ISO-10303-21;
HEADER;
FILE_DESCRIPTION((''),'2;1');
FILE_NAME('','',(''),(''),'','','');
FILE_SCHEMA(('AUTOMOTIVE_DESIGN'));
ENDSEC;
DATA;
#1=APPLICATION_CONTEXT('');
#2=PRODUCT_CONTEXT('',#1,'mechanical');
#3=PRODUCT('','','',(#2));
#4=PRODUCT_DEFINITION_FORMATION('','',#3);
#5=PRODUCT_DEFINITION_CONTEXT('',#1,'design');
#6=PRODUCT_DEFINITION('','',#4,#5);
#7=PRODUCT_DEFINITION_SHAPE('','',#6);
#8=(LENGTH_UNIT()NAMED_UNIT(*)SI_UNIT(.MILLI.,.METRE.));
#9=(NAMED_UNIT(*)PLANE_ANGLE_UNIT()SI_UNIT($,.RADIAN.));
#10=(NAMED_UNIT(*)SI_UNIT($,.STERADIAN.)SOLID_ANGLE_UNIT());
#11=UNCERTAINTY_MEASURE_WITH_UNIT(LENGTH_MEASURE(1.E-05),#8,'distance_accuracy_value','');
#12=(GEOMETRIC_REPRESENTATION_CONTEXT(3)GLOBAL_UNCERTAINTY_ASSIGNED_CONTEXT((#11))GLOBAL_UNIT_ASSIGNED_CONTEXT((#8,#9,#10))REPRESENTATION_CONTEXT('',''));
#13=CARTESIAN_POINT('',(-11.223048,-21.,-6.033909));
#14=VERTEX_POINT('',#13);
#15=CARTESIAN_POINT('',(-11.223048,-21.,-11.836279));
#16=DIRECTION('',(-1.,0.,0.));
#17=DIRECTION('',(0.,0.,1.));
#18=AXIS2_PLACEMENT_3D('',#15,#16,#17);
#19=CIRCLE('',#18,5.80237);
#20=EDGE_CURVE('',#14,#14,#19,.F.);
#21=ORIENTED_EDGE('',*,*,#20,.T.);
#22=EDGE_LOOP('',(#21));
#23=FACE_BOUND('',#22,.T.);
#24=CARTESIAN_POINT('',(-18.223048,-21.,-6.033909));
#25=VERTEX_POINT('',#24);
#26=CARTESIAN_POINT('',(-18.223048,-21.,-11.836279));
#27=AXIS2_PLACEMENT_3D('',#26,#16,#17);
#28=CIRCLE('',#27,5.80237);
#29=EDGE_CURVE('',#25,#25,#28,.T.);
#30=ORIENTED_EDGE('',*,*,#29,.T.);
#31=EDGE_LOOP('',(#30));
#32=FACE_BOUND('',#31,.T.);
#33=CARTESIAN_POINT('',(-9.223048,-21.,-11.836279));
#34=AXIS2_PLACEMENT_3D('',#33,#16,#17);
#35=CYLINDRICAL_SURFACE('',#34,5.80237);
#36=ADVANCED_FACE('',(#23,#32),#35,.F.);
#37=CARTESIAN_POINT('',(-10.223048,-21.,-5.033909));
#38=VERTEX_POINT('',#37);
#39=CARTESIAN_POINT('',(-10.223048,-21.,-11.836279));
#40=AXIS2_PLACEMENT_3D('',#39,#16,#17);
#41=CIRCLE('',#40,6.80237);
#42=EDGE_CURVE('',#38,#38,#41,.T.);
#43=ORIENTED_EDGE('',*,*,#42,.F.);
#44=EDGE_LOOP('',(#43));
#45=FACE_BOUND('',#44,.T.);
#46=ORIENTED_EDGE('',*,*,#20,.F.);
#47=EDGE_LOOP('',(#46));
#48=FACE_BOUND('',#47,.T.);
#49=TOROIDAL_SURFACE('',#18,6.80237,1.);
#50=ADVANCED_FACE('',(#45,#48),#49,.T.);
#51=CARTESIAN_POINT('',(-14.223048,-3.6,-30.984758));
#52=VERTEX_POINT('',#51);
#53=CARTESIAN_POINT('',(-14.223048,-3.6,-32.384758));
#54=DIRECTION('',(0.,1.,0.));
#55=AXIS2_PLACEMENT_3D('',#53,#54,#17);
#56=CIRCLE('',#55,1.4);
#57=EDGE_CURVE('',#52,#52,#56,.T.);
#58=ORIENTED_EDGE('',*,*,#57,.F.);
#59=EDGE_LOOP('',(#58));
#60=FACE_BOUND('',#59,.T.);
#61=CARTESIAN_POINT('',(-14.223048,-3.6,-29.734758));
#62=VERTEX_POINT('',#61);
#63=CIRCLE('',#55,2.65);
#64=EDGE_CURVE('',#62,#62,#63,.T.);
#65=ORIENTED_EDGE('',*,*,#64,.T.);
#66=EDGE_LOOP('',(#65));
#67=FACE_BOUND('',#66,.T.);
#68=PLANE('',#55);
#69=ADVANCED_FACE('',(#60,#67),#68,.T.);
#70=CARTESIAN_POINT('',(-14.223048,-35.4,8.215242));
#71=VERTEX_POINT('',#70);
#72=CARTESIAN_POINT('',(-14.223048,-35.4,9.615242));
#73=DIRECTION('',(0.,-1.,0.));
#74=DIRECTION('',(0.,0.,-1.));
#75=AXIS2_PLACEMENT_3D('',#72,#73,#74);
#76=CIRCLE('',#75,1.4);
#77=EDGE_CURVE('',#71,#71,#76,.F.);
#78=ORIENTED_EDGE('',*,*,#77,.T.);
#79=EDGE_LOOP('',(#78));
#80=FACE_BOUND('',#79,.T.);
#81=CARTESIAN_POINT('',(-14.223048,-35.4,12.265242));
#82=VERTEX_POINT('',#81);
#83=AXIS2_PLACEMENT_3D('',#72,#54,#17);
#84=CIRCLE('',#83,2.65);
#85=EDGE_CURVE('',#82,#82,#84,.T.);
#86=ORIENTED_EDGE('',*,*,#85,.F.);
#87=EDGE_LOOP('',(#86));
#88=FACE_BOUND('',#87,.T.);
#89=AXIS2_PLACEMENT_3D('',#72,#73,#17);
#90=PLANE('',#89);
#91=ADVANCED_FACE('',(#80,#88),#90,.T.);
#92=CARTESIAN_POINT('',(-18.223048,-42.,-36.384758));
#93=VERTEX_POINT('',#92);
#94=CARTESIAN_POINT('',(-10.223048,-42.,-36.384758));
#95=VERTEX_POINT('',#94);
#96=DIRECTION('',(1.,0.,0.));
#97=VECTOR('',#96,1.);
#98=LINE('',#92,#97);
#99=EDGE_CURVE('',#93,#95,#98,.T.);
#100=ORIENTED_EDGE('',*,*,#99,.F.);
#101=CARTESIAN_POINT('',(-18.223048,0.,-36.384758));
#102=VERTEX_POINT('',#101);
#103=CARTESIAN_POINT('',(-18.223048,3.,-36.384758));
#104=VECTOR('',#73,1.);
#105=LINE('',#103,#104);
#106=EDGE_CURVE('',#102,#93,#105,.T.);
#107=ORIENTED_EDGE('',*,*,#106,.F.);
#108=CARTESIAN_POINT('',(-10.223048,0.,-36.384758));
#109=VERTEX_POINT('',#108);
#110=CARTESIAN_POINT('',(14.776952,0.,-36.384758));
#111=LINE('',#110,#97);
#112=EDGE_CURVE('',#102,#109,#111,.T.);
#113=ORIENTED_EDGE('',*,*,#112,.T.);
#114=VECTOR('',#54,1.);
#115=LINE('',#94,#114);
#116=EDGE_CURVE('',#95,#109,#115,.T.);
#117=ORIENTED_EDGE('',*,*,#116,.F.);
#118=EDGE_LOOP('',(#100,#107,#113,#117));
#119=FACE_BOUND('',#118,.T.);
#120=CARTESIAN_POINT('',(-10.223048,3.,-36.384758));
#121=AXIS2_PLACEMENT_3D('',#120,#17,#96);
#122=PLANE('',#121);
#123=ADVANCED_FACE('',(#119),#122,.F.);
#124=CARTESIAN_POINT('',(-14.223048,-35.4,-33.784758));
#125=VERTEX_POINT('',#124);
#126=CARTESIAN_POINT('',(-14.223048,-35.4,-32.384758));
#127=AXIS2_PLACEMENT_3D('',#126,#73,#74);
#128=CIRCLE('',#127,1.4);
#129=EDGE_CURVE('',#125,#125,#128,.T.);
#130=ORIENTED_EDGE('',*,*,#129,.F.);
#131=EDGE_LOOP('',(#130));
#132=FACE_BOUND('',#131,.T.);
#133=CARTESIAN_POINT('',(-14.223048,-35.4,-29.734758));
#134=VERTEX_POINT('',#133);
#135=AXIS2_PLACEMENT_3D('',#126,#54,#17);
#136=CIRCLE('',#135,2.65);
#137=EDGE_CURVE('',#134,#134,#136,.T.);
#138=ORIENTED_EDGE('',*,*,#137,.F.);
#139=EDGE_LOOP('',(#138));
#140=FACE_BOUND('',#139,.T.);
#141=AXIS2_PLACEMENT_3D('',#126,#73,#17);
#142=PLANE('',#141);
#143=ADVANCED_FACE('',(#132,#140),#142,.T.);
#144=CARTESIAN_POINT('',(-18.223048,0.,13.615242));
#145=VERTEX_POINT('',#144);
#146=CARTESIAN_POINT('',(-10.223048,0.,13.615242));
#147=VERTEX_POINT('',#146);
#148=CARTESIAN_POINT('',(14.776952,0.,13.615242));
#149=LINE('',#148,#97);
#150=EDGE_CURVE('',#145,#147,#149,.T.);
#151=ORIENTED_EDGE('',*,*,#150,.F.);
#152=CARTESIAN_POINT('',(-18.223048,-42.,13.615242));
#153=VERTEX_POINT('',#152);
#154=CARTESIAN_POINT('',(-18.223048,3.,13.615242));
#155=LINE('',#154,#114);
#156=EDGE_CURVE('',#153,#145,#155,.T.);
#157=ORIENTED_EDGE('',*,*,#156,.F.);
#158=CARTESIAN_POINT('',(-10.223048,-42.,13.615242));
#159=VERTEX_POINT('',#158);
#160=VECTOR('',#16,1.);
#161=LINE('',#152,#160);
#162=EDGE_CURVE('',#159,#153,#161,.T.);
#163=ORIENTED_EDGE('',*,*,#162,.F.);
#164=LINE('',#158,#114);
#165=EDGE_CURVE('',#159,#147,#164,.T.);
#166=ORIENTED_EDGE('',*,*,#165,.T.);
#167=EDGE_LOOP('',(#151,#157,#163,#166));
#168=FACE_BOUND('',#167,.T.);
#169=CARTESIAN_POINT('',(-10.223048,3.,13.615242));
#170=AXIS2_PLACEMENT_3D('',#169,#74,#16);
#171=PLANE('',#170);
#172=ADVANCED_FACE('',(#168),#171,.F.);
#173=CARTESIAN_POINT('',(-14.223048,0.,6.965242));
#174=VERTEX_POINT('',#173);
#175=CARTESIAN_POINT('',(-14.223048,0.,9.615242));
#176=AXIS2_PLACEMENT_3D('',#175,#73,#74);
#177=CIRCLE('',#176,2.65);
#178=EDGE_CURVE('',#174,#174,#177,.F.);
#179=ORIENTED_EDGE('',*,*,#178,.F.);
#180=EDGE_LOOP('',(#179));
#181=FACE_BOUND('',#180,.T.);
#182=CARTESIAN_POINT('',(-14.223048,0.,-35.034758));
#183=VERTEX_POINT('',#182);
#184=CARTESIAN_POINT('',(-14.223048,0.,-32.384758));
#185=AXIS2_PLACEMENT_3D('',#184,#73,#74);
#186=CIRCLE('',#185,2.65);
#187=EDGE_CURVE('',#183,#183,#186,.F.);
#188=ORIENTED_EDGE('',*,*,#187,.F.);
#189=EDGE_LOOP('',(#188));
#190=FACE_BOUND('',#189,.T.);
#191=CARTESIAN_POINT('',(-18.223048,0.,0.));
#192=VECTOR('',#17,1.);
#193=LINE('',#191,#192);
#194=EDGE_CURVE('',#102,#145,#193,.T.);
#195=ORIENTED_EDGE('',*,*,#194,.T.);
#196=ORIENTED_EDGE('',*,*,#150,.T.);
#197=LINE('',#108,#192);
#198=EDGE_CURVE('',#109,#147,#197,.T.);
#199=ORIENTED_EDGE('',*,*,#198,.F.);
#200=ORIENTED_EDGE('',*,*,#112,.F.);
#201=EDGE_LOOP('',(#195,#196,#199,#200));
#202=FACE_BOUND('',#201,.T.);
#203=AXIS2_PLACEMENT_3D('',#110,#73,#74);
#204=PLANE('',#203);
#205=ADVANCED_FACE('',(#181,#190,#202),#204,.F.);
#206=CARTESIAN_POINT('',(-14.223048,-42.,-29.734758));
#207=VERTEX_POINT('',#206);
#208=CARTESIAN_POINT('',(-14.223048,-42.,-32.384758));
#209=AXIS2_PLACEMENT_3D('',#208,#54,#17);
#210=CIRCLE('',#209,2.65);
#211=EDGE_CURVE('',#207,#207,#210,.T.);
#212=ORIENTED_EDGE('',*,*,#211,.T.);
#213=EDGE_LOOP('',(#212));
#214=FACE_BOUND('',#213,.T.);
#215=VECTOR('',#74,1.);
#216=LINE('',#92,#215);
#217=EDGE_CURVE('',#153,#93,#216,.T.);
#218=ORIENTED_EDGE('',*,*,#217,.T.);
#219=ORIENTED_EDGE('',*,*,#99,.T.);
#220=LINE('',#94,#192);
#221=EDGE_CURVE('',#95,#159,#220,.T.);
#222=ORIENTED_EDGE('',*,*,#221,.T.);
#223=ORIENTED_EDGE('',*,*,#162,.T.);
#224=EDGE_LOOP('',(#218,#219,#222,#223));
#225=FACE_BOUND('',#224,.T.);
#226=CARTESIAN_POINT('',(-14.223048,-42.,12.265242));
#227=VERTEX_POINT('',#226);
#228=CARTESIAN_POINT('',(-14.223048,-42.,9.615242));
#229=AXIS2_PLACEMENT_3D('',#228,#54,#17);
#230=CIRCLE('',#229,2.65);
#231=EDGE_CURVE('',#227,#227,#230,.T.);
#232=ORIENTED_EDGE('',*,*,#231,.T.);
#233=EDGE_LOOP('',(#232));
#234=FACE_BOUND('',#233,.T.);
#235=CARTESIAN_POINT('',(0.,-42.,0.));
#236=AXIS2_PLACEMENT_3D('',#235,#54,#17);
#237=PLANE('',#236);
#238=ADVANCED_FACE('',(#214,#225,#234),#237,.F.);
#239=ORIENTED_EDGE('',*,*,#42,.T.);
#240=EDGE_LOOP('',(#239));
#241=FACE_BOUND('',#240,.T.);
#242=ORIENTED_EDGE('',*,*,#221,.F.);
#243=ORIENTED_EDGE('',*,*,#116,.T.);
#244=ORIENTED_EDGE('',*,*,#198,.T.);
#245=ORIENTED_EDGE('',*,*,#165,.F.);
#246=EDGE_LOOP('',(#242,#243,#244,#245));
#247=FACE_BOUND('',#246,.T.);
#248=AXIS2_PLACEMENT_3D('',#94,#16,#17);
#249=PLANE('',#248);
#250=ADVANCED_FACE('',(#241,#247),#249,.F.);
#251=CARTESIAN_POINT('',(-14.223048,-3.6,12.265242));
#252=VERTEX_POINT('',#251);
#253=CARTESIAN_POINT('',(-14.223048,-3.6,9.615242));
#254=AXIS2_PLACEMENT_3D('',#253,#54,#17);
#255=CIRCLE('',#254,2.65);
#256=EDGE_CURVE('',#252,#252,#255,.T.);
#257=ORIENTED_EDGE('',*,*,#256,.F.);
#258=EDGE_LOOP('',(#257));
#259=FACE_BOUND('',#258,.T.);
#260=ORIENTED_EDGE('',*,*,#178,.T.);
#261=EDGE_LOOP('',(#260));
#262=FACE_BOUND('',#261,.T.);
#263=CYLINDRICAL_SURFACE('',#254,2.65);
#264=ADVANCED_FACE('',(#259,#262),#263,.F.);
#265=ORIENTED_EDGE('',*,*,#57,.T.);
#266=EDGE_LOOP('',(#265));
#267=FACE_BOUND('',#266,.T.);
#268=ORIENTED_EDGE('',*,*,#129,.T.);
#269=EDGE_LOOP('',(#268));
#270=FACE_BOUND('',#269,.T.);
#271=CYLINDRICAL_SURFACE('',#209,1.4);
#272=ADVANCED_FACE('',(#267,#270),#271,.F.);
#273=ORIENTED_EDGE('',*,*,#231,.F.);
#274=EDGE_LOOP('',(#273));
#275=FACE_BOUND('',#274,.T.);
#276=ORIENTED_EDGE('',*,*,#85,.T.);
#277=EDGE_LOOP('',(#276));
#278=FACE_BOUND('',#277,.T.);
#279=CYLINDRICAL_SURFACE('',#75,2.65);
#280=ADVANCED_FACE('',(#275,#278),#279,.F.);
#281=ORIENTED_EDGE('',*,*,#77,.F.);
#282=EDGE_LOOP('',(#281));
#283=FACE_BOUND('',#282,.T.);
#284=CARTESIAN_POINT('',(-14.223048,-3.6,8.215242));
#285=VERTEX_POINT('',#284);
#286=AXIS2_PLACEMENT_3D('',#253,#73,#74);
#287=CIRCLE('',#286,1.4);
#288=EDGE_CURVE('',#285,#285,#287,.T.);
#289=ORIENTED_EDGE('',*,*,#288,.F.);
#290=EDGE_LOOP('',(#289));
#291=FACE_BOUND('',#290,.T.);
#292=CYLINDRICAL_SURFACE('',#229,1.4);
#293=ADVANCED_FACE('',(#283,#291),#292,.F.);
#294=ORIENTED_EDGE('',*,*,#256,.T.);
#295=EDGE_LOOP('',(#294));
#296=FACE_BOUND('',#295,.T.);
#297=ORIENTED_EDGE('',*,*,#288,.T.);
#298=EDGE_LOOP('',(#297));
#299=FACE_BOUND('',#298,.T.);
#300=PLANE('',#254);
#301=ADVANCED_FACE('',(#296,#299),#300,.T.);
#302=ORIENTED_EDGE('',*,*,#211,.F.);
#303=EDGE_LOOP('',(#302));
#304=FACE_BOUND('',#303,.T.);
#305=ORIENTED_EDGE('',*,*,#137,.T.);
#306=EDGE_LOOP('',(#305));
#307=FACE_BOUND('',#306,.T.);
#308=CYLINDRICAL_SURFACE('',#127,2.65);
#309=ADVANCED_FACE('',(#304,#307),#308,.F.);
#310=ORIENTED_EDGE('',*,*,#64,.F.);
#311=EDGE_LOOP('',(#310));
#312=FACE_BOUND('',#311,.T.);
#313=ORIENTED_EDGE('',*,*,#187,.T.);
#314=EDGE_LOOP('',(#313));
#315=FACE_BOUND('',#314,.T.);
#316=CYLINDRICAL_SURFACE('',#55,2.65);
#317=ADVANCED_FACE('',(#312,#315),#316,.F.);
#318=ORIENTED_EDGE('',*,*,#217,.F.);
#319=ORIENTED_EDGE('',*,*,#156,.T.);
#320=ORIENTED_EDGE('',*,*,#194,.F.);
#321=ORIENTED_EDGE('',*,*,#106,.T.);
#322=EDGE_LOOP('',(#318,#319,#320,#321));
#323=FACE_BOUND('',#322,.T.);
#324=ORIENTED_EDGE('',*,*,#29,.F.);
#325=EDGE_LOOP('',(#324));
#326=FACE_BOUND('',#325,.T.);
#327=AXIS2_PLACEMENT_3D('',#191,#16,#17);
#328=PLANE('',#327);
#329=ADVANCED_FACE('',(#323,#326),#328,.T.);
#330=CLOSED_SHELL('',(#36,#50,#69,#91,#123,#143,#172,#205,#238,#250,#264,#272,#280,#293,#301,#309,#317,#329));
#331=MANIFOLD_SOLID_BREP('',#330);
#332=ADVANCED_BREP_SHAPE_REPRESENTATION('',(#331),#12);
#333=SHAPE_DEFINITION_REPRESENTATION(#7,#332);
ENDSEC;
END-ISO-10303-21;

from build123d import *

# Parameters (mm, degrees)
SKETCH1_W           = 25
SKETCH1_H           = 50
SKETCH1_R           = 3.4
BOSS_EXTRUDE1_DEPTH = 3
SKETCH2_W           = 50
SKETCH2_H           = 3
BOSS_EXTRUDE2_DEPTH = 8
SKETCH3_W           = 8
SKETCH3_H           = 50
BOSS_EXTRUDE3_DEPTH = 42
SKETCH4_R           = 2.65
CUT_EXTRUDE1_DEPTH  = 6.6
SKETCH5_R           = 5.802370205
CUT_EXTRUDE2_DEPTH  = 9
FILLET2_R           = 1
SKETCH6_R           = 12.6
BOSS_EXTRUDE4_DEPTH = 2
FILLET4_R           = 1
SKETCH8_R           = 1.589780168
SKETCH8_R_2         = 1.777428262
CUT_EXTRUDE3_DEPTH  = 10
SKETCH9_W           = 49.021678163
SKETCH9_H           = 20.976854622
CUT_EXTRUDE4_DEPTH  = 68.79439129
SKETCH10_R          = 1.4
CUT_EXTRUDE5_DEPTH  = 56.950783118


with BuildPart() as part:
    # Sketch1 → Boss-Extrude1 (new body)
    with BuildSketch(Plane(origin=(0, 0, 0), x_dir=(1, 0, 0), z_dir=(0, 1, 0))):
        with Locations((2.276951673, 11.384758364)):
            Rectangle(SKETCH1_W, SKETCH1_H)
        with Locations(Location((1.276951673, 11.384758364, 0), (0, 0, 270))):
            Circle(SKETCH1_R, mode=Mode.SUBTRACT)
    extrude(amount=BOSS_EXTRUDE1_DEPTH)

    # Sketch2 → Boss-Extrude2 (add)
    with BuildSketch(Plane.ZY.offset(10.223048327)):
        with Locations((-11.384758364, 1.5)):
            Rectangle(SKETCH2_W, SKETCH2_H)
    extrude(amount=BOSS_EXTRUDE2_DEPTH)

    # Sketch3 → Boss-Extrude3 (add)
    with BuildSketch(Plane.XZ):
        with Locations((-14.223048327, -11.384758364)):
            Rectangle(SKETCH3_W, SKETCH3_H)
    extrude(amount=BOSS_EXTRUDE3_DEPTH)

    # Sketch4 → Cut-Extrude1 (cut)
    with BuildSketch(Plane(origin=(0, 3, 0), x_dir=(1, 0, 0), z_dir=(0, 1, 0))):
        with Locations(Location((-14.223048327, 32.384758364, 0), (0, 0, 270))):
            Circle(SKETCH4_R)
        with Locations(Location((-14.223048327, -9.615241636, 0), (0, 0, 270))):
            Circle(SKETCH4_R)
    cut_extrude1 = extrude(amount=-CUT_EXTRUDE1_DEPTH, mode=Mode.SUBTRACT)

    # Mirror1: Cut-Extrude1 across plane
    add(cut_extrude1.mirror(Plane.ZX.offset(-19.5)), mode=Mode.SUBTRACT)

    # Sketch5 → Cut-Extrude2 (cut)
    with BuildSketch(Plane.ZY.offset(18.223048327)):
        with Locations((-11.836279124, -21)):
            Circle(SKETCH5_R)
    extrude(amount=-CUT_EXTRUDE2_DEPTH, mode=Mode.SUBTRACT)

    # Fillet2
    fillet2_edges = [part.edges().sort_by_distance(p)[0] for p in [
        (-10.223048327, -21, -17.638649329),
    ]]
    fillet(fillet2_edges, radius=FILLET2_R)

    # Mirror2: Cut-Extrude1 across plane
    add(cut_extrude1.mirror(Plane.ZY.offset(1.723048327)), mode=Mode.SUBTRACT)

    # Sketch6 → Boss-Extrude4 (add)
    with BuildSketch(Plane(origin=(0, 3, 0), x_dir=(1, 0, 0), z_dir=(0, 1, 0))):
        with BuildLine():
            Line((14.776951673, 5.825082115), (14.776951673, 16.944434614))
            ThreePointArc((14.776951673, 16.944434614), (-13.323048327, 11.384758364), (14.776951673, 5.825082115))
        make_face()
        with Locations(Location((1.276951673, 11.384758364, 0), (0, 0, 270))):
            Circle(SKETCH6_R, mode=Mode.SUBTRACT)
    extrude(amount=BOSS_EXTRUDE4_DEPTH)

    # Fillet4
    # the kernel refuses this fillet: 1 mm, written as the material it takes off along each edge
    with BuildSketch(Plane(origin=(14.776951673, 5, -3.325082115), x_dir=(0, -1, 0), z_dir=(0, 0, -1))) as fillet4_piece_1:
        with BuildLine():
            CenterArc((FILLET4_R, FILLET4_R), FILLET4_R, 180, 90)
            Line((0, FILLET4_R), (0, 0))
            Line((0, 0), (FILLET4_R, 0))
        make_face()
    extrude(amount=16.119352499, mode=Mode.SUBTRACT)

    # Sketch8 → Cut-Extrude3 (cut)
    with BuildSketch(Plane(origin=(0, 3, 0), x_dir=(1, 0, 0), z_dir=(0, 1, 0))):
        with Locations(Location((1.276951673, 19.884758364, 0), (0, 0, 270))):
            Circle(SKETCH8_R)
        with Locations(Location((1.276951673, 2.884758364, 0), (0, 0, 270))):
            Circle(SKETCH8_R_2)
    extrude(amount=-CUT_EXTRUDE3_DEPTH, mode=Mode.SUBTRACT)

    # Sketch9 → Cut-Extrude4 (cut, through all)
    with BuildSketch(Plane.XY.offset(13.615241636)):
        with Locations((-9.733887409, 10.488427311)):
            Rectangle(SKETCH9_W, SKETCH9_H)
    extrude(amount=-CUT_EXTRUDE4_DEPTH, mode=Mode.SUBTRACT)

    # Sketch10 → Cut-Extrude5 (cut, through all)
    with BuildSketch(Plane(origin=(0, -3.6, 0), x_dir=(1, 0, 0), z_dir=(0, 1, 0))):
        with Locations(Location((-14.223048327, 32.384758364, 0), (0, 0, 270))):
            Circle(SKETCH10_R)
    cut_extrude5 = extrude(amount=-CUT_EXTRUDE5_DEPTH, mode=Mode.SUBTRACT)

    # Mirror3: Cut-Extrude5 across plane
    add(cut_extrude5.mirror(Plane.XY.offset(-11.384758364)), mode=Mode.SUBTRACT)


solid = part.part
